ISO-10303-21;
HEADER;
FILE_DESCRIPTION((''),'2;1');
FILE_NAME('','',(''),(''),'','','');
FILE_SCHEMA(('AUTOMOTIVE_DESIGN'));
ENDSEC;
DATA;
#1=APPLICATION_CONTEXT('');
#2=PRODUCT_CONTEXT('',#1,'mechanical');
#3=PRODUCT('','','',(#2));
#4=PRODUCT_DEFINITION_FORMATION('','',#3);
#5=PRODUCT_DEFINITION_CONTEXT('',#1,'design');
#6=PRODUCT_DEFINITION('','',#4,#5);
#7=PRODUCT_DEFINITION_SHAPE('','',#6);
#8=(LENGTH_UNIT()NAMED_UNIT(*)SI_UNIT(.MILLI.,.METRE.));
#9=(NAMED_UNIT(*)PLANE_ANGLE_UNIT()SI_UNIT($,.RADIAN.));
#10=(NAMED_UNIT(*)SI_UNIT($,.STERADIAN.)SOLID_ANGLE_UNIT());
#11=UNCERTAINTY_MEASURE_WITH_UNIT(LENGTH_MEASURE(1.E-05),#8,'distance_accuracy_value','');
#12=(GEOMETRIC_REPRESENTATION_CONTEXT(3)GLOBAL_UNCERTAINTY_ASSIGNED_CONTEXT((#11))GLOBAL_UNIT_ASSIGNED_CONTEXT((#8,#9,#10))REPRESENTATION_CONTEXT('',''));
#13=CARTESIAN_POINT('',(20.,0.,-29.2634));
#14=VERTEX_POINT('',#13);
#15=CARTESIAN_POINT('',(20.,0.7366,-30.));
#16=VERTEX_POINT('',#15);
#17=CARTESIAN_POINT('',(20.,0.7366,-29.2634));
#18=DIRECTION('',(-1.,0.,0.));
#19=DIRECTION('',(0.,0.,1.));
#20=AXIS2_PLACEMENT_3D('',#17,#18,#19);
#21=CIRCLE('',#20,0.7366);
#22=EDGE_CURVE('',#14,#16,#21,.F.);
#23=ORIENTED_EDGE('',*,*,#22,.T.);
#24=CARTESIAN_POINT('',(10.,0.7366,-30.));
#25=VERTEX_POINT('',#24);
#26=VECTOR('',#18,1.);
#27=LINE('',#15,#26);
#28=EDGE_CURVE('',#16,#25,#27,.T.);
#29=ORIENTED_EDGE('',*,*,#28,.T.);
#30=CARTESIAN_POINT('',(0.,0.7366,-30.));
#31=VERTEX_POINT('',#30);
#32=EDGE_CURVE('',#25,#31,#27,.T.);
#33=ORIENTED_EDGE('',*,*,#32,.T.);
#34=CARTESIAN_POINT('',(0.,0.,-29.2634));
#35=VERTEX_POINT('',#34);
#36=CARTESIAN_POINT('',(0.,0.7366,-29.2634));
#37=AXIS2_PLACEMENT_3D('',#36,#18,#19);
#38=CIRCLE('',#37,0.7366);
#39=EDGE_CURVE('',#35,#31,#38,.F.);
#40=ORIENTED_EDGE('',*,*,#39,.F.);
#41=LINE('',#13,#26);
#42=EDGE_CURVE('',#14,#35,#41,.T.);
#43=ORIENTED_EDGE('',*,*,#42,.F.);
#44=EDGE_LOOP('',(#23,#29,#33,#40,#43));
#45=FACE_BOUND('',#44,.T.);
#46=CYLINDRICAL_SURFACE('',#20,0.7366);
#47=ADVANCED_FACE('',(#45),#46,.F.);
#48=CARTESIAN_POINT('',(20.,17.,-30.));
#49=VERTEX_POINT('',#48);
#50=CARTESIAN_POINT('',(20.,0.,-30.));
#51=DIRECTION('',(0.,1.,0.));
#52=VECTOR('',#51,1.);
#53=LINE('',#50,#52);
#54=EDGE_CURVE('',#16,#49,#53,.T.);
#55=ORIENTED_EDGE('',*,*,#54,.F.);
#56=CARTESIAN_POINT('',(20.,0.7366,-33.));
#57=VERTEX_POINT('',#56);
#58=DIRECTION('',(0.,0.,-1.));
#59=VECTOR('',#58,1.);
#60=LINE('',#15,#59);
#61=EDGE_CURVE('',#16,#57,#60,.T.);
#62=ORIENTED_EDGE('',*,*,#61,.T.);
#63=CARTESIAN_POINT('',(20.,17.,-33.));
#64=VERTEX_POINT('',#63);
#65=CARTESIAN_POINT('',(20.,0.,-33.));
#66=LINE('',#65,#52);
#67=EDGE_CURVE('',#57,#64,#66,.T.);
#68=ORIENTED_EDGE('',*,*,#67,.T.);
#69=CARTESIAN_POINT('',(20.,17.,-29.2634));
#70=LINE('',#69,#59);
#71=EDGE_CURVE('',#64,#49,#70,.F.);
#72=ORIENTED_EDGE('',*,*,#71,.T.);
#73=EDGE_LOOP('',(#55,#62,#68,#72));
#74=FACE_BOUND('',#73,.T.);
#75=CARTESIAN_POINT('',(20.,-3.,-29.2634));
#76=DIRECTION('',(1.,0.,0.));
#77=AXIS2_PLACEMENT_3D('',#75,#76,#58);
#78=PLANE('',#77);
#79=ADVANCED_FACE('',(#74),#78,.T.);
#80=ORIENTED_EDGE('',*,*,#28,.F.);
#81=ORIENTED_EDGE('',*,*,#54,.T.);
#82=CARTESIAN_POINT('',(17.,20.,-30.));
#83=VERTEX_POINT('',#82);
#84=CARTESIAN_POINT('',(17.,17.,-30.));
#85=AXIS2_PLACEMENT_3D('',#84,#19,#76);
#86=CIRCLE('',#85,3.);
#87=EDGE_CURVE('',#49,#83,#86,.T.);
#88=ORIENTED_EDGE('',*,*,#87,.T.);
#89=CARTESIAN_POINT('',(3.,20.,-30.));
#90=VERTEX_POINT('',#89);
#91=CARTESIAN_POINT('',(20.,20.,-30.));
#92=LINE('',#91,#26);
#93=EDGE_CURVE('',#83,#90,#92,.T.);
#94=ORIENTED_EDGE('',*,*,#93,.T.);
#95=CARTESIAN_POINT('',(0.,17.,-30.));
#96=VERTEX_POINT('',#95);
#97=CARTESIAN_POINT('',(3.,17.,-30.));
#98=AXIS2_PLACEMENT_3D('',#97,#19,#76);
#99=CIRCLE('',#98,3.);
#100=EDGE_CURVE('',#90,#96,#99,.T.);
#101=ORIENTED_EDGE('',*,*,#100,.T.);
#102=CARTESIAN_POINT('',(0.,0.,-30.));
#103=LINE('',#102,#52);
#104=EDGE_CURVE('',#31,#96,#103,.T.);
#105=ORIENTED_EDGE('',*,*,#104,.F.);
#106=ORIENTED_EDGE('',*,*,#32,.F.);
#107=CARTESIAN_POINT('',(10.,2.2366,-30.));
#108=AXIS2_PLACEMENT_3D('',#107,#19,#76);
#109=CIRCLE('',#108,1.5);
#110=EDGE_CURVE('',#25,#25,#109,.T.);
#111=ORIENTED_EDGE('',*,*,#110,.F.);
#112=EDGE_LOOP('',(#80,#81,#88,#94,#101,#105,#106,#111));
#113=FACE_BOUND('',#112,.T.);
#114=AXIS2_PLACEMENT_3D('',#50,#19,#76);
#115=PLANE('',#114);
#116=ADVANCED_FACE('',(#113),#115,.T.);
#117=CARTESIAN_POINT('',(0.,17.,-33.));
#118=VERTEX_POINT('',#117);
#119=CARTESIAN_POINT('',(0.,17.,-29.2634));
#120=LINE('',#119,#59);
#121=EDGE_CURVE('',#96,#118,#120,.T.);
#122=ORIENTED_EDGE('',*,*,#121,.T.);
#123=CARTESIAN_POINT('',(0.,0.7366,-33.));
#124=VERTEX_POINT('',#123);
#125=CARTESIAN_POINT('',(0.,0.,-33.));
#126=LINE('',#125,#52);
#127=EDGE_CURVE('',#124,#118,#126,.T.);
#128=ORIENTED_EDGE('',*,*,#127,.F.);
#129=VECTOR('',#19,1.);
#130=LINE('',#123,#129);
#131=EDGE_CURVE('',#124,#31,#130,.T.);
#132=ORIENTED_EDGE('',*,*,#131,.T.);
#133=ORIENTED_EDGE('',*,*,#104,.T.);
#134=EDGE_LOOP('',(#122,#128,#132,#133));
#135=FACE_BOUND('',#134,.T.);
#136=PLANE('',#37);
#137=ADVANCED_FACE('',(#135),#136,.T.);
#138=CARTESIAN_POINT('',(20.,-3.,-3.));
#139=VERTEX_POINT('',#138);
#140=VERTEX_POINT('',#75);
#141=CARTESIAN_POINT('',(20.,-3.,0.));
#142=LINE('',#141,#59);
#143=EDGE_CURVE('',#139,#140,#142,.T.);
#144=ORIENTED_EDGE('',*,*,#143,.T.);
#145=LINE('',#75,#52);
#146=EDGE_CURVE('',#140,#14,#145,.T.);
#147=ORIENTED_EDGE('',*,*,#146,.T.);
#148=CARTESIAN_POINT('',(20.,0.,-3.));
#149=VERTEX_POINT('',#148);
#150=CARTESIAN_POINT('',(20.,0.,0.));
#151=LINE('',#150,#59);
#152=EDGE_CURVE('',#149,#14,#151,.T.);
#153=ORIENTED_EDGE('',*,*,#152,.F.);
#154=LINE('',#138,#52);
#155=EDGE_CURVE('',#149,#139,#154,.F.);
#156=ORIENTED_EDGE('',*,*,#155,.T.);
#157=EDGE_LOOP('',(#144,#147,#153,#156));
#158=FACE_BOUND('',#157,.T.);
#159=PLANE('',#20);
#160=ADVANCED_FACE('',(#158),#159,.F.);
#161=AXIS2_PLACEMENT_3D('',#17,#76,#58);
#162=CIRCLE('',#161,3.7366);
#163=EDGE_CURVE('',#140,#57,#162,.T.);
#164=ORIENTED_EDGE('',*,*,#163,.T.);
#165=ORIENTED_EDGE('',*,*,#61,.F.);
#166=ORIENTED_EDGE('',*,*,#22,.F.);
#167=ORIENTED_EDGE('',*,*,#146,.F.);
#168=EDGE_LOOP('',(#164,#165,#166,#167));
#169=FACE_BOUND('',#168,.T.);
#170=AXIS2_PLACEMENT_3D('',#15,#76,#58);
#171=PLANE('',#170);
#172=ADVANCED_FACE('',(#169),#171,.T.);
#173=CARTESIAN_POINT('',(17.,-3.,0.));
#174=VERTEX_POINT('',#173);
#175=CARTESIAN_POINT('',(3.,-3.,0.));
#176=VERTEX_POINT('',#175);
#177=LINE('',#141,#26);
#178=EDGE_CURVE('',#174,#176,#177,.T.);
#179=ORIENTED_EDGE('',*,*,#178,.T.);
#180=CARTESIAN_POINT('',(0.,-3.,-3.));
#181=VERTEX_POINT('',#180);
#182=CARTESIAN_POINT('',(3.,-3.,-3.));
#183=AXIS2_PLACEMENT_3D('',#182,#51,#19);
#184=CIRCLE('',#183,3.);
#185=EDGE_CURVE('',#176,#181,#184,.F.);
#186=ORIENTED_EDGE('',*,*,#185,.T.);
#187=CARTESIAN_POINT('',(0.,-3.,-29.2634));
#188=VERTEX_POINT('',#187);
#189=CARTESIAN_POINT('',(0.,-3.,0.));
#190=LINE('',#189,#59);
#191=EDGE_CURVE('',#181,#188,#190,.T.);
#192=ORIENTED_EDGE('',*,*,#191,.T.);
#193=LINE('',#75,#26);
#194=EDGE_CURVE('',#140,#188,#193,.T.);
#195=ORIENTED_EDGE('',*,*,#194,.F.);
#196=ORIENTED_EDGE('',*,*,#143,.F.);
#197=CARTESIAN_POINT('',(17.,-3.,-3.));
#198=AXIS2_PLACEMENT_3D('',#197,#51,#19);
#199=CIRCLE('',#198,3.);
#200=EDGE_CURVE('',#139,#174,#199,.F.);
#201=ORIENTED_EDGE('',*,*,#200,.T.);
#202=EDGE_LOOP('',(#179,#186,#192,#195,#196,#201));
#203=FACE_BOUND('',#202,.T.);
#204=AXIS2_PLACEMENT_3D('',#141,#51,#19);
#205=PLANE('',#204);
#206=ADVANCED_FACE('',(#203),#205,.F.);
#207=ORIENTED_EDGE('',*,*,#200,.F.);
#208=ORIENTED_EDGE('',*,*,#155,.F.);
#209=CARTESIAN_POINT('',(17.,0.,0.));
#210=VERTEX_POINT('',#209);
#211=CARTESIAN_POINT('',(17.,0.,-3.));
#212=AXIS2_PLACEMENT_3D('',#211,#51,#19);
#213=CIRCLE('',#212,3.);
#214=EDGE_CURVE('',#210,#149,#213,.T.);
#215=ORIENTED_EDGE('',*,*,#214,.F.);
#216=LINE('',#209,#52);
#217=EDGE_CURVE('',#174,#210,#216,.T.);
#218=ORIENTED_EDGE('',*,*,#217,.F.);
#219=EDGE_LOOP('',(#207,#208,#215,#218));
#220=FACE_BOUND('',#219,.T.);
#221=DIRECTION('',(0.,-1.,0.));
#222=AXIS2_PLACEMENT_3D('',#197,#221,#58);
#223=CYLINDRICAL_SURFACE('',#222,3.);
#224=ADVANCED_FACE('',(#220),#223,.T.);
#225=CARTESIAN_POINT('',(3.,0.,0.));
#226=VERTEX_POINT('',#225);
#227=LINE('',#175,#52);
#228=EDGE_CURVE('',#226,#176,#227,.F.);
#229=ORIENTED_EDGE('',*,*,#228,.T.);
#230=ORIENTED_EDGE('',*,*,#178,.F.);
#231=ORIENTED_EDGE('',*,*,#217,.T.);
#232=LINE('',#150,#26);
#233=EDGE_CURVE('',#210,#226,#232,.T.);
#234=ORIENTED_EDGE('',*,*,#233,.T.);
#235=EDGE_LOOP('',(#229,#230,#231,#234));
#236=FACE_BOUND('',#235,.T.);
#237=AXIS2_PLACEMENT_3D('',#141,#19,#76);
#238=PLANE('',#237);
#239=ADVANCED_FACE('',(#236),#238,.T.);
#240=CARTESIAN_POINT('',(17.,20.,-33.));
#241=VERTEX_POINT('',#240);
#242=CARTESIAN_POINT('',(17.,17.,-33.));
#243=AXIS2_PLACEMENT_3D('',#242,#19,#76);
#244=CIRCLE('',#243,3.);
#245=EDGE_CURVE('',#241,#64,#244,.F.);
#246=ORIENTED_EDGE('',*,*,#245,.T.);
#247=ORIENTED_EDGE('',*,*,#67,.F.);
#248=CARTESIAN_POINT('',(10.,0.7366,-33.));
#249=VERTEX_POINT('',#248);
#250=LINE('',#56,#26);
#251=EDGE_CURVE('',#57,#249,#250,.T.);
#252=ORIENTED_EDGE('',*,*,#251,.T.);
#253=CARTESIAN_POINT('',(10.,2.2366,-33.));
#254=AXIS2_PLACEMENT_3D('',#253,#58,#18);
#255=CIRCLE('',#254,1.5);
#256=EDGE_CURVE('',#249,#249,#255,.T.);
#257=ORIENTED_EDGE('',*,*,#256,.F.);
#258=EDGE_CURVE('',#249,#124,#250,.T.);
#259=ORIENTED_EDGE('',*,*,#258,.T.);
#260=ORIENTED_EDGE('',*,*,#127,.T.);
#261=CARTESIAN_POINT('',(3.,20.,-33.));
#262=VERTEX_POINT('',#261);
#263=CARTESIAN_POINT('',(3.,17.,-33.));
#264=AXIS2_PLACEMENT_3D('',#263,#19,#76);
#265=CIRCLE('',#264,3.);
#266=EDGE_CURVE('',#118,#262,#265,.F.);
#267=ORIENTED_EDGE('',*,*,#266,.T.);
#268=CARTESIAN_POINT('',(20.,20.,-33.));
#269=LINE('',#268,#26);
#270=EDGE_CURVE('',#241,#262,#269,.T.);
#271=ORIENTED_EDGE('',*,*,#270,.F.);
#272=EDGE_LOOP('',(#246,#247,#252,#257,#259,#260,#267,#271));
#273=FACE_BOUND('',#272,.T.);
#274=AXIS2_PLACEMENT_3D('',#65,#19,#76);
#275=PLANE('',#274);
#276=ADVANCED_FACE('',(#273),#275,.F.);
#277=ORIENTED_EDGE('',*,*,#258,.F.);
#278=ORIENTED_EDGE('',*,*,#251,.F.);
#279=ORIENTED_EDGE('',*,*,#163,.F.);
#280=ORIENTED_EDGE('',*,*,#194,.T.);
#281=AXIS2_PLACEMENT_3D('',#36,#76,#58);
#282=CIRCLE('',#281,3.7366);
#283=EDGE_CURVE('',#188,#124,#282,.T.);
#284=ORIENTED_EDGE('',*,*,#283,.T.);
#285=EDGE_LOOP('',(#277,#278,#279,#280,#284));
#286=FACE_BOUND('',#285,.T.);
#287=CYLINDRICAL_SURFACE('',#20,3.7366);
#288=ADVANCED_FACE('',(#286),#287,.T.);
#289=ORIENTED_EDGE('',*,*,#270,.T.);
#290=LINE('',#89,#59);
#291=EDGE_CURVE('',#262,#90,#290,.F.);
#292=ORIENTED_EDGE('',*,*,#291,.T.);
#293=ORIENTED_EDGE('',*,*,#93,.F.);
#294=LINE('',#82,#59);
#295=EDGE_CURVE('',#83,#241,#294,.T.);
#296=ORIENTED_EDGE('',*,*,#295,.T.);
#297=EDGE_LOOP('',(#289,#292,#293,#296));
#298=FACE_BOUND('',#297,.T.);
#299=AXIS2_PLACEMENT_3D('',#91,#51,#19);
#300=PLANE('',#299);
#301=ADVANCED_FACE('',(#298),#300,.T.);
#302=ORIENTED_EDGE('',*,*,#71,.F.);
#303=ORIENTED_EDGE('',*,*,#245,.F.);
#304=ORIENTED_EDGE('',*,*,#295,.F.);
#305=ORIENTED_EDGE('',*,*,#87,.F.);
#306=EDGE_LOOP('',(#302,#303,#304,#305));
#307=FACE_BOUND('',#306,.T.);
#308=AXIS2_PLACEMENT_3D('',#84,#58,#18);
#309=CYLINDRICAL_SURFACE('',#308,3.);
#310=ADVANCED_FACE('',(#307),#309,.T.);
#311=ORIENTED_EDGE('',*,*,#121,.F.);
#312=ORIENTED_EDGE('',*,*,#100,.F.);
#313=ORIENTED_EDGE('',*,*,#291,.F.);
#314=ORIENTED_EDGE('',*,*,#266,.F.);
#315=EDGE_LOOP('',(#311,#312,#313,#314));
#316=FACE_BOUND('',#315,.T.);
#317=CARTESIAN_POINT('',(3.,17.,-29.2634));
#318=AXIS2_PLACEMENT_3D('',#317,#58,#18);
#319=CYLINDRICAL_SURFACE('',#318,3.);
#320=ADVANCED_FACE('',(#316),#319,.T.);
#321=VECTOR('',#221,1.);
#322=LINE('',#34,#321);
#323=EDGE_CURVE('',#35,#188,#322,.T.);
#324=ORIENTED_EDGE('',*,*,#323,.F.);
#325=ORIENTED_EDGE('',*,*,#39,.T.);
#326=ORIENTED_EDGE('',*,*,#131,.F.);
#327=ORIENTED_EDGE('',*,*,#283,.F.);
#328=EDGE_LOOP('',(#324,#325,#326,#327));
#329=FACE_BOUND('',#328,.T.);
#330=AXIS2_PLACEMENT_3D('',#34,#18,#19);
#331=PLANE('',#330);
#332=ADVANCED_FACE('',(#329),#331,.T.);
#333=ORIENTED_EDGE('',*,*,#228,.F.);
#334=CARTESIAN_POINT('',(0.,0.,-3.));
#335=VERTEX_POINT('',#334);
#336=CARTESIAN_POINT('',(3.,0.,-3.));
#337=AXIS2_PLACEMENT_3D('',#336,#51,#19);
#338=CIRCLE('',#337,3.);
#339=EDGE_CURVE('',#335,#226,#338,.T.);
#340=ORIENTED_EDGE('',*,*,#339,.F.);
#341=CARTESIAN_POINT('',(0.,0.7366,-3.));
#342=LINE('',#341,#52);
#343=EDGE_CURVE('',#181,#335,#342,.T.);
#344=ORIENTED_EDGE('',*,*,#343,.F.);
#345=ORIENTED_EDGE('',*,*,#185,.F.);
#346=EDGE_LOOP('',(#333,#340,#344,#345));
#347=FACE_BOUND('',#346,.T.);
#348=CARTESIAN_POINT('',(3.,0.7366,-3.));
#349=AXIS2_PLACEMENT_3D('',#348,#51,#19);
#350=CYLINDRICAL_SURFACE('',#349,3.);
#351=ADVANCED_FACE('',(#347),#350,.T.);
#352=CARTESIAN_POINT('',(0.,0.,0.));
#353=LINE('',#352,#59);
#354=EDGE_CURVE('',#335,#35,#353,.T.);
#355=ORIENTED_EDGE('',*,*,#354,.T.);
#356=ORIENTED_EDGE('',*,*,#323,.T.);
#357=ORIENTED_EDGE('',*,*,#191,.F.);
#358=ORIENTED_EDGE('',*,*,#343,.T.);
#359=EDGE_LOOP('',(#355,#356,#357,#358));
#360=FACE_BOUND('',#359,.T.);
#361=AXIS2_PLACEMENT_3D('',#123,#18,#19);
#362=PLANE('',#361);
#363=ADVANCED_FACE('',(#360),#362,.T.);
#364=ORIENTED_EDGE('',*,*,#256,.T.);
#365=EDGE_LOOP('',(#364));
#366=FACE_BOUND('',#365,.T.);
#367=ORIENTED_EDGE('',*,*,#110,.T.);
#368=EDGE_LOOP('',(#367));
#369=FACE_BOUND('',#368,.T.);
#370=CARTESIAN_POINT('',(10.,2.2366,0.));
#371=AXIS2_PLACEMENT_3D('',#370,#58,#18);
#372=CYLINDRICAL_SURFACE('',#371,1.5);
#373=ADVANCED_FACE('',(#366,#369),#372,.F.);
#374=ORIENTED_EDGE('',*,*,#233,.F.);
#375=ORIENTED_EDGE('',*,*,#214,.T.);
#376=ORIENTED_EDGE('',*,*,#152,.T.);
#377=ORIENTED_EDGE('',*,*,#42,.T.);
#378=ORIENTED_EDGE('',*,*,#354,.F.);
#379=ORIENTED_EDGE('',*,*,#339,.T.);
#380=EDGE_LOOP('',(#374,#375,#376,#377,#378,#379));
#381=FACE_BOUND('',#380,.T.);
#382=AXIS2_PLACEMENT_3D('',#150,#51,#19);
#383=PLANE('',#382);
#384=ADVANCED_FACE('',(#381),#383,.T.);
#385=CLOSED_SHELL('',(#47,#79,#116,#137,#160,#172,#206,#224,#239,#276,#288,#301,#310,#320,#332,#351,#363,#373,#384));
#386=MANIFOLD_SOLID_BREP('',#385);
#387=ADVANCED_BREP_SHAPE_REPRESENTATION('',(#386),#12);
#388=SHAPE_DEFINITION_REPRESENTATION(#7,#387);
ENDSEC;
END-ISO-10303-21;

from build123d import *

# Parameters (mm, degrees)
BASE_FLANGE1_DEPTH = 20
FILLET1_R          = 3
SKETCH5_R          = 1.5
CUT_EXTRUDE1_DEPTH = 44.462627624


# Sheet-metal steps are written as plain solids
with BuildPart() as part:
    # Sketch1 → Base-Flange1 (new body)
    with BuildSketch(Plane(origin=(0, 0, 0), x_dir=(0, 0, -1), z_dir=(1, 0, 0))):
        with BuildLine():
            Line((0, 0), (29.2634, 0))
            ThreePointArc((29.2634, 0), (29.784254855, 0.215745145), (30, 0.7366))
            Line((30, 0.7366), (30, 20))
            Line((30, 20), (33, 20))
            Line((33, 20), (33, 0.7366))
            ThreePointArc((33, 0.7366), (31.905575199, -1.905575199), (29.2634, -3))
            Line((29.2634, -3), (0, -3))
            Line((0, -3), (0, 0))
        make_face()
    extrude(amount=BASE_FLANGE1_DEPTH)

    # Fillet1
    fillet1_edges = [part.edges().sort_by_distance(p)[0] for p in [
        (20, -1.5, 0),
        (20, 20, -31.5),
        (0, -1.5, 0),
        (0, 20, -31.5),
    ]]
    fillet(fillet1_edges, radius=FILLET1_R)

    # Sketch5 → Cut-Extrude1 (cut, through all)
    with BuildSketch(Plane(origin=(0, 0, -33), x_dir=(-1, 0, 0), z_dir=(0, 0, -1))):
        with Locations(Location((-10, 2.2366, 0), (0, 0, 270))):
            Circle(SKETCH5_R)
    extrude(amount=-CUT_EXTRUDE1_DEPTH, mode=Mode.SUBTRACT)


solid = part.part
